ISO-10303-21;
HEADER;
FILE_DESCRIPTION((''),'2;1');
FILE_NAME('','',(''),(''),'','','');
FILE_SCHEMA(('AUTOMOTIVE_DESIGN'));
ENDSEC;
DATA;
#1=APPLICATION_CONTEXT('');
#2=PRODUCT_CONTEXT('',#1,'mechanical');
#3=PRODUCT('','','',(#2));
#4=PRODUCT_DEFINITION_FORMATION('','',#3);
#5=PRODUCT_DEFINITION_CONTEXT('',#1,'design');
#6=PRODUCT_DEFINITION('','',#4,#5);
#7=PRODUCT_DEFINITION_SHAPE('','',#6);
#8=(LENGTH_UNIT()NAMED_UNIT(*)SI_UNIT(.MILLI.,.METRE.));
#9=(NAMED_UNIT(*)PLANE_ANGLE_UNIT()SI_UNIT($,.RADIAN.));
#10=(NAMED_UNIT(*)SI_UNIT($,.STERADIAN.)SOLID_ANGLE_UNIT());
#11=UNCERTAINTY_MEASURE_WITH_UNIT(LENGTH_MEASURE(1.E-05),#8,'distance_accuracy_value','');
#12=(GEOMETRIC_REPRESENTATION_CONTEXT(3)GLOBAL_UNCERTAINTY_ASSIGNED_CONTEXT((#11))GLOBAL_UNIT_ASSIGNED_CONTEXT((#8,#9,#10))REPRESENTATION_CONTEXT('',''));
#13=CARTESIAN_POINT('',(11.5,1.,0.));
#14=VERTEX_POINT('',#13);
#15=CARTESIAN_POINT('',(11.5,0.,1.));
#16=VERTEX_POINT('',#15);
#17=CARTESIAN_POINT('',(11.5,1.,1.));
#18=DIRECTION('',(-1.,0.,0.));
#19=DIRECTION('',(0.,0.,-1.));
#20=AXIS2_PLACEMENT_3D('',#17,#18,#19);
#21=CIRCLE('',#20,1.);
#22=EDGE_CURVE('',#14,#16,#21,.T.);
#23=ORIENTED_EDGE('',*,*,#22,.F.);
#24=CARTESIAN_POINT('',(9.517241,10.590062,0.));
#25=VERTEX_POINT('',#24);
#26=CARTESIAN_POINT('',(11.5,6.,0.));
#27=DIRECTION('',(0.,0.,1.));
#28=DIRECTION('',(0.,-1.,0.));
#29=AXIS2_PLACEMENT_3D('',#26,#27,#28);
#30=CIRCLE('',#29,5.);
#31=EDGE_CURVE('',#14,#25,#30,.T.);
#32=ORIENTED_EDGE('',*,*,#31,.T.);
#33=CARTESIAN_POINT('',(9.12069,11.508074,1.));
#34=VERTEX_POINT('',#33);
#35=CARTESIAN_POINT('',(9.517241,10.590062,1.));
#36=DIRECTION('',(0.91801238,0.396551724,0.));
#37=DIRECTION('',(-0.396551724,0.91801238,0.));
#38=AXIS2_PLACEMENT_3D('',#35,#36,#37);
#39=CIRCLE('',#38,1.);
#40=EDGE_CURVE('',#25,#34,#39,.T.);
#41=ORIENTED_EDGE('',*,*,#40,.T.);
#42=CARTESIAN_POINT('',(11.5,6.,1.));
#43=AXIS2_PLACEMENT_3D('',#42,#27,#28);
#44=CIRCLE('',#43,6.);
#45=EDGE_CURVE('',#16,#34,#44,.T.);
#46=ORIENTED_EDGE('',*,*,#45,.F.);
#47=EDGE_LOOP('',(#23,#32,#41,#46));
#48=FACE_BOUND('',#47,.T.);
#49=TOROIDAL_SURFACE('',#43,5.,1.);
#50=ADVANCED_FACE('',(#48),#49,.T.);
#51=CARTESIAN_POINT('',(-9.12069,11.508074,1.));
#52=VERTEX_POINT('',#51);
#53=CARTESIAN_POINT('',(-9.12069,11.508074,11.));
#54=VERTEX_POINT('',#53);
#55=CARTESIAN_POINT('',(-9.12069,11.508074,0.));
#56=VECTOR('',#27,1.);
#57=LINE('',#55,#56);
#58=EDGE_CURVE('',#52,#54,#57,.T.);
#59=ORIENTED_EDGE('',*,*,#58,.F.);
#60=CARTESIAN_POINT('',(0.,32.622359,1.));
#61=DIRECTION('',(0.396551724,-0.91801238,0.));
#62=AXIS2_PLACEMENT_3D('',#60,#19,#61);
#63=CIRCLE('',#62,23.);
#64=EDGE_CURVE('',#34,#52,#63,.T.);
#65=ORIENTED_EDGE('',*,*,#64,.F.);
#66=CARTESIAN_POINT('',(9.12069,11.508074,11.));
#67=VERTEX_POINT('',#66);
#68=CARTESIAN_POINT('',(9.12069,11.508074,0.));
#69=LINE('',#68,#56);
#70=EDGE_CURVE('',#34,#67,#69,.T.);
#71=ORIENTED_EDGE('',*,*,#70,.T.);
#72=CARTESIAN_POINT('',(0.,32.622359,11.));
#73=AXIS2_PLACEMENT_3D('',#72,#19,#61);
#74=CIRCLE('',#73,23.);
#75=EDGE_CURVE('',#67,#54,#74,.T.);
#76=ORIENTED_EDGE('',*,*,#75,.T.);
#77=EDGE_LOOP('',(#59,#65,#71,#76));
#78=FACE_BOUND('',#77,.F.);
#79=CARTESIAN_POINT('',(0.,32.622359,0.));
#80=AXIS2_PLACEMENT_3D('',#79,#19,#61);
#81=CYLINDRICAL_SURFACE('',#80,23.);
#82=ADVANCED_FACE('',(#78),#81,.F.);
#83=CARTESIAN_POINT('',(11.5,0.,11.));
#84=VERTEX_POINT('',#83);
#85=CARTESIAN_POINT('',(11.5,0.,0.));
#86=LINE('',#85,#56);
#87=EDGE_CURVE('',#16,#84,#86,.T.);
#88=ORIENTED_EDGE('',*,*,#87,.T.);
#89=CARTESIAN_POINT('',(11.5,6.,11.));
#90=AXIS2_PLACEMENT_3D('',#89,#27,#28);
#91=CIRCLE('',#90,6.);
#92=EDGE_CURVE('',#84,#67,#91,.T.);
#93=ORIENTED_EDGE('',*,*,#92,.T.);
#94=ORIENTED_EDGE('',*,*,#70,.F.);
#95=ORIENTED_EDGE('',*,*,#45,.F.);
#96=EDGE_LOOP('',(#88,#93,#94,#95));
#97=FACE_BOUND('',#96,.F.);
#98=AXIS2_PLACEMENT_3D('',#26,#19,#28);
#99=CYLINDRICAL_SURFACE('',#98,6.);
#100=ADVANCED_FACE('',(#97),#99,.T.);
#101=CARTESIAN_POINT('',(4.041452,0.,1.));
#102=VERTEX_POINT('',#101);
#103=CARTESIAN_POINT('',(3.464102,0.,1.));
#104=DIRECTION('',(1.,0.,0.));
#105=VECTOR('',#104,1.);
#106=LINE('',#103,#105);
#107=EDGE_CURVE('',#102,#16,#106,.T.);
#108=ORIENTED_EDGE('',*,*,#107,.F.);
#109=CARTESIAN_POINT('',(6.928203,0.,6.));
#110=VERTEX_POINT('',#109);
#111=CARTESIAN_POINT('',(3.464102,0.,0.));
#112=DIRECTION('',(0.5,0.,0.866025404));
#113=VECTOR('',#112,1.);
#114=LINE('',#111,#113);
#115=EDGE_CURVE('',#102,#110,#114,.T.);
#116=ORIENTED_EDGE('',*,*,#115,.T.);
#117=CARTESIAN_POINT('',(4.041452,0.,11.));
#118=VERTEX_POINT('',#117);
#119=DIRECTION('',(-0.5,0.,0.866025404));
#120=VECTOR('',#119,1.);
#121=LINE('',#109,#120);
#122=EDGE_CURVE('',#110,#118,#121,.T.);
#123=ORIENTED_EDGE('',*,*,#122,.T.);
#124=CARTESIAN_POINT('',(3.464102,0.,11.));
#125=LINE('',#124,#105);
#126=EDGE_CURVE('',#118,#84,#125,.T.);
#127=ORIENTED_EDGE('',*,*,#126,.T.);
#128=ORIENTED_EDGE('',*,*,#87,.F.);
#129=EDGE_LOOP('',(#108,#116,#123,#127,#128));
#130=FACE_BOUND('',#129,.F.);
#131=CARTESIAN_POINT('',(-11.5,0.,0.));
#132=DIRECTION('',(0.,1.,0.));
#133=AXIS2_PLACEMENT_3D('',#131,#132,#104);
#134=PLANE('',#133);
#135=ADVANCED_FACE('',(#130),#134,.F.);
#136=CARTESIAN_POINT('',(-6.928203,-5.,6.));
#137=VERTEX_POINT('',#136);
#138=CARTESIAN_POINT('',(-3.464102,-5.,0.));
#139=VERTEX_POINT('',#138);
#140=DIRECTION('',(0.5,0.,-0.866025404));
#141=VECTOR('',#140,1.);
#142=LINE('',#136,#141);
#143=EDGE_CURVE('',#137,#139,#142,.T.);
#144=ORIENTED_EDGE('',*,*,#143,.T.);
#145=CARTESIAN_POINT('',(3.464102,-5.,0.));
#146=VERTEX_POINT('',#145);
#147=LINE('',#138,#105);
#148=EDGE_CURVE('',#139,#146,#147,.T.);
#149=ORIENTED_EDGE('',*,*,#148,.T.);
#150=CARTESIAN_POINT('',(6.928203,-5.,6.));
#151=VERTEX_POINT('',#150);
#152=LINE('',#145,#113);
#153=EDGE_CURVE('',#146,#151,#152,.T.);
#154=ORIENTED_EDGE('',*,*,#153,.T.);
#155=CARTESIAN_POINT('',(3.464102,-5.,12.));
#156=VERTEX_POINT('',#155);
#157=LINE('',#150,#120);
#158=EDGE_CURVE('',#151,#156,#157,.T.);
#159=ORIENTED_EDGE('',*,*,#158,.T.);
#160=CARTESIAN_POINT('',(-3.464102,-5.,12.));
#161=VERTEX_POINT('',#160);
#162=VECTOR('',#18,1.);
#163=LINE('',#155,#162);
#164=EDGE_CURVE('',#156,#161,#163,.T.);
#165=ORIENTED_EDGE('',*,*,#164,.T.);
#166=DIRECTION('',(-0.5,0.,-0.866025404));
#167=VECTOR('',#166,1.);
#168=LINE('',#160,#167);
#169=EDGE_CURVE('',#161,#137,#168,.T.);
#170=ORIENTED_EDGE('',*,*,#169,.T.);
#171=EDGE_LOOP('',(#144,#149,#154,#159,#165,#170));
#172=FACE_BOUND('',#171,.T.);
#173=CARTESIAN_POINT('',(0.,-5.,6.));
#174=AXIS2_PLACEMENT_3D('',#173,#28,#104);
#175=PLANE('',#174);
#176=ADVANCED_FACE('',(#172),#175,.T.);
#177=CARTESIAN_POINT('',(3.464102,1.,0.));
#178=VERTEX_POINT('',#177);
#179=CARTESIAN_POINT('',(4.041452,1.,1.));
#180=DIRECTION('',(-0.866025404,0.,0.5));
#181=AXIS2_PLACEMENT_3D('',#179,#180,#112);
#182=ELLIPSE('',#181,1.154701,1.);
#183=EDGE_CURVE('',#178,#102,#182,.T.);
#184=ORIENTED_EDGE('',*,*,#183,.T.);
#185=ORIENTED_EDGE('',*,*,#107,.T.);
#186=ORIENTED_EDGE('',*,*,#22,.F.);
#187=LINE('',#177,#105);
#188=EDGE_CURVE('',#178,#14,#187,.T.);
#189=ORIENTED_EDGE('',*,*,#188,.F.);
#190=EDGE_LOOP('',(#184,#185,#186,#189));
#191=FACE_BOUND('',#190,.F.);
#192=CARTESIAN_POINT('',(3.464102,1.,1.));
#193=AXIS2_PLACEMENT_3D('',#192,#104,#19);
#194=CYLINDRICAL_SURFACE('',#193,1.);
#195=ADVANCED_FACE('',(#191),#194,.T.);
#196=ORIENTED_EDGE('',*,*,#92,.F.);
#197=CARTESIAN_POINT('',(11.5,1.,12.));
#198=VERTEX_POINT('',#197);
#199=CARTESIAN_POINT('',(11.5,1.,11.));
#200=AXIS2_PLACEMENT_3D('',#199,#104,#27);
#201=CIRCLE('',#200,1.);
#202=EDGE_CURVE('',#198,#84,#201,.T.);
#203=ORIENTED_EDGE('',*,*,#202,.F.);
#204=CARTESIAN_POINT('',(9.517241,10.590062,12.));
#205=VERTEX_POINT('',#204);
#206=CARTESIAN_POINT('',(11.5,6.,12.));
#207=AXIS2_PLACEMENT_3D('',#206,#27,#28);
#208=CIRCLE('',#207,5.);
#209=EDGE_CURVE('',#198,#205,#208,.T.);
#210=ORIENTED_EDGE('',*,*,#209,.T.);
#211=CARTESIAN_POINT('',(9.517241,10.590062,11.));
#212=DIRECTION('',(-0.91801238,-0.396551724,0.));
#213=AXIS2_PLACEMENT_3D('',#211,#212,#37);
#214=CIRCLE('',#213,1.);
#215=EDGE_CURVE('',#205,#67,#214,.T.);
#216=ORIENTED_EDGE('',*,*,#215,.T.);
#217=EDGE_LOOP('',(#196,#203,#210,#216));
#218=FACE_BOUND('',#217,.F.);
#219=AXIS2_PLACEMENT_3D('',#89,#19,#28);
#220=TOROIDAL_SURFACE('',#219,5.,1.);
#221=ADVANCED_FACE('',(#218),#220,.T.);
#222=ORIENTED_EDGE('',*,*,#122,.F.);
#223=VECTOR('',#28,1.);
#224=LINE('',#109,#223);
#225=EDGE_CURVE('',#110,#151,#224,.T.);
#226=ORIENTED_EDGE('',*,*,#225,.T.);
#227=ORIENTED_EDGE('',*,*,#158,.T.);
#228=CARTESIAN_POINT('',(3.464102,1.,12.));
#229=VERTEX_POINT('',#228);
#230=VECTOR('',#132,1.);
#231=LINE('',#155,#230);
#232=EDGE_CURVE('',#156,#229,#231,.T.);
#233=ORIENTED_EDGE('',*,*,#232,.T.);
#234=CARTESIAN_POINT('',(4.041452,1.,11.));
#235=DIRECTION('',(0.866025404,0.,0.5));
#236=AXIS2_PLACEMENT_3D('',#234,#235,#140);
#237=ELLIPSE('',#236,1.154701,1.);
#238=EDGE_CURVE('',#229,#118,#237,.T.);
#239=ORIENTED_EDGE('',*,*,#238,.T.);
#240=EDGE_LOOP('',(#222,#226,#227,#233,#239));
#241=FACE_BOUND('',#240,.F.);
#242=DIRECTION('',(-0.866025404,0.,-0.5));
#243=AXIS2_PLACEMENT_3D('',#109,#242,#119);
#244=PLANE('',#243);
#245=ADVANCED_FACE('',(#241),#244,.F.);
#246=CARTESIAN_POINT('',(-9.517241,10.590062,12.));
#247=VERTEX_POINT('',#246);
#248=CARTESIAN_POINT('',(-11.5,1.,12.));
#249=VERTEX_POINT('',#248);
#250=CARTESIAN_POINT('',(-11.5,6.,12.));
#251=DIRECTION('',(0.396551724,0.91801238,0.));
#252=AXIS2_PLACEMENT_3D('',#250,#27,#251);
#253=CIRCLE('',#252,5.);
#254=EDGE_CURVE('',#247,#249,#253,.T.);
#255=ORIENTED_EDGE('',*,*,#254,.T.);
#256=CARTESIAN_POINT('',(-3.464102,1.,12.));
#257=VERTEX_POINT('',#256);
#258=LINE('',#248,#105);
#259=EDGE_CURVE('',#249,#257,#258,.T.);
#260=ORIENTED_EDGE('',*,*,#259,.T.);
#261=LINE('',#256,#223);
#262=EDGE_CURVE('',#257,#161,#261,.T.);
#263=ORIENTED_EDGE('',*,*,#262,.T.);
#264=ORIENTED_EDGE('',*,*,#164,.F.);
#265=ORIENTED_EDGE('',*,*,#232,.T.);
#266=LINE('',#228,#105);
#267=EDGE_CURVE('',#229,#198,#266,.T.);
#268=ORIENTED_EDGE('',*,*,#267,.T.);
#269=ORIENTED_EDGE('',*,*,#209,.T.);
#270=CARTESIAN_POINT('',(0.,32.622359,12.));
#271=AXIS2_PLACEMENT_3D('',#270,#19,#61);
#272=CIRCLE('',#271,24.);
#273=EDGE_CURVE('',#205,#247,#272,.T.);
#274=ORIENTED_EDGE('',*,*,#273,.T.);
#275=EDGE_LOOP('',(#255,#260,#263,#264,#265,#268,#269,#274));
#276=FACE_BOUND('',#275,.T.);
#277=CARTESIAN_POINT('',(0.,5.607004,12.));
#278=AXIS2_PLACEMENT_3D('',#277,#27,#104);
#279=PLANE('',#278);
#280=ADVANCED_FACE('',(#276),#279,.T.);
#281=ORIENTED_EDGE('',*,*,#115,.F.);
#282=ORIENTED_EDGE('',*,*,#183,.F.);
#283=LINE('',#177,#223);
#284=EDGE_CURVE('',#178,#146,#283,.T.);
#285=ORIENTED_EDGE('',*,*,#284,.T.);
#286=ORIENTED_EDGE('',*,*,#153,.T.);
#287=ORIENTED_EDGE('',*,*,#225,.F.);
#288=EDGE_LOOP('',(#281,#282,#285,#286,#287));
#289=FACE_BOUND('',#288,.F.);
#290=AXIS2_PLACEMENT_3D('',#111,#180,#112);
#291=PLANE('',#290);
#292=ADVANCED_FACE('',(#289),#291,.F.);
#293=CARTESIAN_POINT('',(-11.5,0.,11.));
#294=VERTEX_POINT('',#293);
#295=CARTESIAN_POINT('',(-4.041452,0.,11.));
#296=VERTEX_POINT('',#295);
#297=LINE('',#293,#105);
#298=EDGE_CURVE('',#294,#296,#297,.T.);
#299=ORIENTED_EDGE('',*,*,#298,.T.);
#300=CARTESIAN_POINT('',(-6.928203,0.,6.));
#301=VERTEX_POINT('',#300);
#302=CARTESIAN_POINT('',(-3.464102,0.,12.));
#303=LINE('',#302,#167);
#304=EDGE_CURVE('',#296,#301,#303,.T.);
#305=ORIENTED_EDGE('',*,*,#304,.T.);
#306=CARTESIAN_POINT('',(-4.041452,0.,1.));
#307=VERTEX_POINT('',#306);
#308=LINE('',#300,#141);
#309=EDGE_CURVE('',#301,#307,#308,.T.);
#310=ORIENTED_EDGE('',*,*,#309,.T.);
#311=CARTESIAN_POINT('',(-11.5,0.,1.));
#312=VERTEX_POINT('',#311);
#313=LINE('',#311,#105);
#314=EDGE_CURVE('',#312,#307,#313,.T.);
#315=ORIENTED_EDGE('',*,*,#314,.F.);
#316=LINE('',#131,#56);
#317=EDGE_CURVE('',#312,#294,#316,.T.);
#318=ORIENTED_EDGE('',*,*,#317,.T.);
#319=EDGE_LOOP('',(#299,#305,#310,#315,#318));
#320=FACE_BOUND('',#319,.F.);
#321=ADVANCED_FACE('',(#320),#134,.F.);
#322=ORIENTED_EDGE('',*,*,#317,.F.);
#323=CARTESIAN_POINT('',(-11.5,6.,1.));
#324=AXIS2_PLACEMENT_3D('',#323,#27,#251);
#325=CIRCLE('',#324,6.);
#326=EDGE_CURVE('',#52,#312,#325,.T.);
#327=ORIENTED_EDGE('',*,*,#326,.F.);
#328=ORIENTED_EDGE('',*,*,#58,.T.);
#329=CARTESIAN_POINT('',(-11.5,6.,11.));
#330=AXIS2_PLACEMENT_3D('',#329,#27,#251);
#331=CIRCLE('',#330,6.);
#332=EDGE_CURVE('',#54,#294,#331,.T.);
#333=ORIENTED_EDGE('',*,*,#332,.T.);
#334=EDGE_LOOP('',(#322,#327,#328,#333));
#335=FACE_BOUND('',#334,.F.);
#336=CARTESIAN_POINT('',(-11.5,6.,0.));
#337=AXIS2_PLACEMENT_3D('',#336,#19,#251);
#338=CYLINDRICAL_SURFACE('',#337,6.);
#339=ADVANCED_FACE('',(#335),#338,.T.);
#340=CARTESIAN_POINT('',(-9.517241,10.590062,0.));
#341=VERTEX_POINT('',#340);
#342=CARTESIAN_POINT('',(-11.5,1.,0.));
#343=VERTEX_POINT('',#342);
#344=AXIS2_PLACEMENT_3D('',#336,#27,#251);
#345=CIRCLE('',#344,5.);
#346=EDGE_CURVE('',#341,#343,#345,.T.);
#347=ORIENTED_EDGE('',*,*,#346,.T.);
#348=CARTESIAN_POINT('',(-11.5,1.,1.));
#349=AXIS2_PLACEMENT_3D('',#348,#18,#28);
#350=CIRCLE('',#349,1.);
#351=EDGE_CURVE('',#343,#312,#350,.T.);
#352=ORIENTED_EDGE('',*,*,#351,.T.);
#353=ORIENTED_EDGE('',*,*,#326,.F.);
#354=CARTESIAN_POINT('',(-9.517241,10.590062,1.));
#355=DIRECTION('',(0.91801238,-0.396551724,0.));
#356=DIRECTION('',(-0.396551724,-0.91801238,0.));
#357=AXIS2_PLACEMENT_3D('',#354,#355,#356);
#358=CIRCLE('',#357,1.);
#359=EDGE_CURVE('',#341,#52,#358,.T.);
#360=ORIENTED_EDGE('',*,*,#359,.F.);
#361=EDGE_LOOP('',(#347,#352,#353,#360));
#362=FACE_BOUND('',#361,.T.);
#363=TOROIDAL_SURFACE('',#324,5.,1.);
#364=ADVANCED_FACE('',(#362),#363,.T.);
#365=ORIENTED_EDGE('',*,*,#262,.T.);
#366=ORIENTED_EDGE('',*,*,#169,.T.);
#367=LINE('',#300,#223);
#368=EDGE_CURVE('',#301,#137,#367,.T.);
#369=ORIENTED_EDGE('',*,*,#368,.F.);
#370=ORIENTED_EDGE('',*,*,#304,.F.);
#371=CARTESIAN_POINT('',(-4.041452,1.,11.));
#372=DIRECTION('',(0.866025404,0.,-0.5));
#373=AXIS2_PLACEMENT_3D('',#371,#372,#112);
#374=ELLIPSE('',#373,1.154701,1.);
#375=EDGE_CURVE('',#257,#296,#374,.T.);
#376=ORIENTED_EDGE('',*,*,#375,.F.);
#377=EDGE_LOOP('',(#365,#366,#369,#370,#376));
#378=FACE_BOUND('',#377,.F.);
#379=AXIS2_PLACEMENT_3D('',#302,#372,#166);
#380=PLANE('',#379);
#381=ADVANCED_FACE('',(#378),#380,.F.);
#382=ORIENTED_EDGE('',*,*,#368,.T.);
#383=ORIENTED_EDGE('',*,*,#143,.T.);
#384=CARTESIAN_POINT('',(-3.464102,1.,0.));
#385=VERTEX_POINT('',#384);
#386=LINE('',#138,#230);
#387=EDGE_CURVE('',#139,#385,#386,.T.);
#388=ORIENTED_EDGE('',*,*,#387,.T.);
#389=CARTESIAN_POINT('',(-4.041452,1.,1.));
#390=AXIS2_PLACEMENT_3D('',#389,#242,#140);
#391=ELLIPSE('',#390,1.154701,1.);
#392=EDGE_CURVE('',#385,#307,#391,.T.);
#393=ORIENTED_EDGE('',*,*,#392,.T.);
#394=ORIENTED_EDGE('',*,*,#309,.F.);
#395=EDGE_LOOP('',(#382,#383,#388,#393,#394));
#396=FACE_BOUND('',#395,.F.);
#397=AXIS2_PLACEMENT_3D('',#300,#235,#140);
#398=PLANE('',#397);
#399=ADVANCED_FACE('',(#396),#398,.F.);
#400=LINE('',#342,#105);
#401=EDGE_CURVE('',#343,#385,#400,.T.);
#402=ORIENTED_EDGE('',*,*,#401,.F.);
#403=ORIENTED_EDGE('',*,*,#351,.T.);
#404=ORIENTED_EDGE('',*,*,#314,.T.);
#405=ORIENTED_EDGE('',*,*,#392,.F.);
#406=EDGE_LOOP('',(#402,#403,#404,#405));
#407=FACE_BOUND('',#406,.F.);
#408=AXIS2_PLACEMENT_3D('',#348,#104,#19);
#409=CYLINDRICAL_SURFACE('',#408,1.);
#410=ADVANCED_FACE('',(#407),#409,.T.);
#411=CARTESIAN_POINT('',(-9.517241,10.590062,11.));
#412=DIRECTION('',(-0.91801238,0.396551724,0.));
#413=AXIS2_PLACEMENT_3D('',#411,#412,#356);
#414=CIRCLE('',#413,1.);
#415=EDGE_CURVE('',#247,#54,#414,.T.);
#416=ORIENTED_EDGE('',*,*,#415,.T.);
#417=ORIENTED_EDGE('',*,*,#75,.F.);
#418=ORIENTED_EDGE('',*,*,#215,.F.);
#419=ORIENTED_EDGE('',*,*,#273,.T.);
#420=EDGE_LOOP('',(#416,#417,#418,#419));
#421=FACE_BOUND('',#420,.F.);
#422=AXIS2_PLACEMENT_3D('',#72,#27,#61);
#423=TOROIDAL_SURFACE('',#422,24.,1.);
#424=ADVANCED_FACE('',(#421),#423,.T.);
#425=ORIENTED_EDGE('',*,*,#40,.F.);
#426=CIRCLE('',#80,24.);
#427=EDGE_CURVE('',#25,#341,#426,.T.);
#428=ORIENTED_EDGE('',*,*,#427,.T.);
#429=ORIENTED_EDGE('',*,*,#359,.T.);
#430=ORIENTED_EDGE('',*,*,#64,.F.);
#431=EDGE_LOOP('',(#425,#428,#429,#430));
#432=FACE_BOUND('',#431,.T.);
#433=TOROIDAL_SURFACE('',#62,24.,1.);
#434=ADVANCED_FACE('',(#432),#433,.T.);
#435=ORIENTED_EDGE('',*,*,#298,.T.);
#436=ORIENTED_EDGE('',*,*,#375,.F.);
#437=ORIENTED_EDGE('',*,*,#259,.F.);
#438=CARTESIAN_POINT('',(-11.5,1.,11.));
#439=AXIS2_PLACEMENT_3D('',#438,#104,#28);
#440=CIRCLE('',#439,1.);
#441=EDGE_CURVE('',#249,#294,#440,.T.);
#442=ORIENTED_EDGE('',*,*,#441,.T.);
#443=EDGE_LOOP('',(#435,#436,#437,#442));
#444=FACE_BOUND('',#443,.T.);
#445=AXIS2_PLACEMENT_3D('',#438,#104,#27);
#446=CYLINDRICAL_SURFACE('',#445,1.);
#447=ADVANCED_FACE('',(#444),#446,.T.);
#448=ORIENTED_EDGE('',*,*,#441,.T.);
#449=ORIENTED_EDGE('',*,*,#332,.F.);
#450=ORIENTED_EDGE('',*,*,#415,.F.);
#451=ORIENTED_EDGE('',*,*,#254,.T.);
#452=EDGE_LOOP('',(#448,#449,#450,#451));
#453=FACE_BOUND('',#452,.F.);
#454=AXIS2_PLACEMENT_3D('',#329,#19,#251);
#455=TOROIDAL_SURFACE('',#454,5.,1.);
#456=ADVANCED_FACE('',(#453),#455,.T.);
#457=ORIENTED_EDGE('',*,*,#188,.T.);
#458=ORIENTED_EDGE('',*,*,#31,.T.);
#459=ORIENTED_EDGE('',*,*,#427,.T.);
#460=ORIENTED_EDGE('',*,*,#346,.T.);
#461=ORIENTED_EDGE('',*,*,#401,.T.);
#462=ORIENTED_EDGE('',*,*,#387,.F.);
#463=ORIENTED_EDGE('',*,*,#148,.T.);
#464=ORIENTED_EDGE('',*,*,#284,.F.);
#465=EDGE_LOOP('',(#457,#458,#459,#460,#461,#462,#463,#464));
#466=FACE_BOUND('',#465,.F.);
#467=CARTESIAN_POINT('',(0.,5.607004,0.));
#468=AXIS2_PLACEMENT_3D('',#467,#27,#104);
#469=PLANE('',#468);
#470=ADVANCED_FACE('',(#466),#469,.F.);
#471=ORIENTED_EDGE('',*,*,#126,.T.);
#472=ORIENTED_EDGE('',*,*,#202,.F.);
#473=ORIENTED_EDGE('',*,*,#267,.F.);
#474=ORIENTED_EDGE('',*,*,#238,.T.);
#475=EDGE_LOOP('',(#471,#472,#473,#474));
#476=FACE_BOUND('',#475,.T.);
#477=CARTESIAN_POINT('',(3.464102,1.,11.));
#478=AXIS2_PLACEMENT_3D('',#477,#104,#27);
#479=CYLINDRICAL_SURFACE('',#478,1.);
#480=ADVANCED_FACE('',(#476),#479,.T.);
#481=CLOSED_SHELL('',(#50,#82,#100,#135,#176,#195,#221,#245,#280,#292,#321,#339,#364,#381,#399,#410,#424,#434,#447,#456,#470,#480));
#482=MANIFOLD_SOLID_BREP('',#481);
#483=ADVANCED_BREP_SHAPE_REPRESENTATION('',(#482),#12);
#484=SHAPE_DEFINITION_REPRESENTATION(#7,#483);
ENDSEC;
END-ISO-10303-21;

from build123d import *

# Parameters (mm, degrees)
F1_DEPTH = 5
F3_DEPTH = 12
F4_R     = 1


# Not quite as in the source:
# - a feature names something its author has since deleted; it is built from what else it names


with BuildPart() as f1:
    # F0 (on Front) → F1 (new body)
    with BuildSketch(Plane.XZ):
        Polygon((3.4641016151, 0), (6.9282032303, 6), (3.4641016151, 12), (-3.4641016151, 12), (-6.9282032303, 6), (-3.4641016151, 0), align=None)
    extrude(amount=F1_DEPTH)

    # F2 (on Top) → F3 (join)
    with BuildSketch(Plane.XY):
        with BuildLine():
            ThreePointArc((-9.1206896552, 11.5080742808), (-17.3757316857, 7.2148156887), (-11.5, 0))
            Line((-11.5, 0), (11.5, 0))
            ThreePointArc((11.5, 0), (17.3757316857, 7.2148156887), (9.1206896552, 11.5080742808))
            ThreePointArc((9.1206896552, 11.5080742808), (0, 9.6223590239), (-9.1206896552, 11.5080742808))
        make_face()
    extrude(amount=F3_DEPTH)

    # F4
    f4_edges = [f1.edges().sort_by_distance(p)[0] for p in [
        (7.482051, 0, 12),
        (7.482051, 0, 0),
    ]]
    fillet(f4_edges, radius=F4_R)


solid = f1.part
